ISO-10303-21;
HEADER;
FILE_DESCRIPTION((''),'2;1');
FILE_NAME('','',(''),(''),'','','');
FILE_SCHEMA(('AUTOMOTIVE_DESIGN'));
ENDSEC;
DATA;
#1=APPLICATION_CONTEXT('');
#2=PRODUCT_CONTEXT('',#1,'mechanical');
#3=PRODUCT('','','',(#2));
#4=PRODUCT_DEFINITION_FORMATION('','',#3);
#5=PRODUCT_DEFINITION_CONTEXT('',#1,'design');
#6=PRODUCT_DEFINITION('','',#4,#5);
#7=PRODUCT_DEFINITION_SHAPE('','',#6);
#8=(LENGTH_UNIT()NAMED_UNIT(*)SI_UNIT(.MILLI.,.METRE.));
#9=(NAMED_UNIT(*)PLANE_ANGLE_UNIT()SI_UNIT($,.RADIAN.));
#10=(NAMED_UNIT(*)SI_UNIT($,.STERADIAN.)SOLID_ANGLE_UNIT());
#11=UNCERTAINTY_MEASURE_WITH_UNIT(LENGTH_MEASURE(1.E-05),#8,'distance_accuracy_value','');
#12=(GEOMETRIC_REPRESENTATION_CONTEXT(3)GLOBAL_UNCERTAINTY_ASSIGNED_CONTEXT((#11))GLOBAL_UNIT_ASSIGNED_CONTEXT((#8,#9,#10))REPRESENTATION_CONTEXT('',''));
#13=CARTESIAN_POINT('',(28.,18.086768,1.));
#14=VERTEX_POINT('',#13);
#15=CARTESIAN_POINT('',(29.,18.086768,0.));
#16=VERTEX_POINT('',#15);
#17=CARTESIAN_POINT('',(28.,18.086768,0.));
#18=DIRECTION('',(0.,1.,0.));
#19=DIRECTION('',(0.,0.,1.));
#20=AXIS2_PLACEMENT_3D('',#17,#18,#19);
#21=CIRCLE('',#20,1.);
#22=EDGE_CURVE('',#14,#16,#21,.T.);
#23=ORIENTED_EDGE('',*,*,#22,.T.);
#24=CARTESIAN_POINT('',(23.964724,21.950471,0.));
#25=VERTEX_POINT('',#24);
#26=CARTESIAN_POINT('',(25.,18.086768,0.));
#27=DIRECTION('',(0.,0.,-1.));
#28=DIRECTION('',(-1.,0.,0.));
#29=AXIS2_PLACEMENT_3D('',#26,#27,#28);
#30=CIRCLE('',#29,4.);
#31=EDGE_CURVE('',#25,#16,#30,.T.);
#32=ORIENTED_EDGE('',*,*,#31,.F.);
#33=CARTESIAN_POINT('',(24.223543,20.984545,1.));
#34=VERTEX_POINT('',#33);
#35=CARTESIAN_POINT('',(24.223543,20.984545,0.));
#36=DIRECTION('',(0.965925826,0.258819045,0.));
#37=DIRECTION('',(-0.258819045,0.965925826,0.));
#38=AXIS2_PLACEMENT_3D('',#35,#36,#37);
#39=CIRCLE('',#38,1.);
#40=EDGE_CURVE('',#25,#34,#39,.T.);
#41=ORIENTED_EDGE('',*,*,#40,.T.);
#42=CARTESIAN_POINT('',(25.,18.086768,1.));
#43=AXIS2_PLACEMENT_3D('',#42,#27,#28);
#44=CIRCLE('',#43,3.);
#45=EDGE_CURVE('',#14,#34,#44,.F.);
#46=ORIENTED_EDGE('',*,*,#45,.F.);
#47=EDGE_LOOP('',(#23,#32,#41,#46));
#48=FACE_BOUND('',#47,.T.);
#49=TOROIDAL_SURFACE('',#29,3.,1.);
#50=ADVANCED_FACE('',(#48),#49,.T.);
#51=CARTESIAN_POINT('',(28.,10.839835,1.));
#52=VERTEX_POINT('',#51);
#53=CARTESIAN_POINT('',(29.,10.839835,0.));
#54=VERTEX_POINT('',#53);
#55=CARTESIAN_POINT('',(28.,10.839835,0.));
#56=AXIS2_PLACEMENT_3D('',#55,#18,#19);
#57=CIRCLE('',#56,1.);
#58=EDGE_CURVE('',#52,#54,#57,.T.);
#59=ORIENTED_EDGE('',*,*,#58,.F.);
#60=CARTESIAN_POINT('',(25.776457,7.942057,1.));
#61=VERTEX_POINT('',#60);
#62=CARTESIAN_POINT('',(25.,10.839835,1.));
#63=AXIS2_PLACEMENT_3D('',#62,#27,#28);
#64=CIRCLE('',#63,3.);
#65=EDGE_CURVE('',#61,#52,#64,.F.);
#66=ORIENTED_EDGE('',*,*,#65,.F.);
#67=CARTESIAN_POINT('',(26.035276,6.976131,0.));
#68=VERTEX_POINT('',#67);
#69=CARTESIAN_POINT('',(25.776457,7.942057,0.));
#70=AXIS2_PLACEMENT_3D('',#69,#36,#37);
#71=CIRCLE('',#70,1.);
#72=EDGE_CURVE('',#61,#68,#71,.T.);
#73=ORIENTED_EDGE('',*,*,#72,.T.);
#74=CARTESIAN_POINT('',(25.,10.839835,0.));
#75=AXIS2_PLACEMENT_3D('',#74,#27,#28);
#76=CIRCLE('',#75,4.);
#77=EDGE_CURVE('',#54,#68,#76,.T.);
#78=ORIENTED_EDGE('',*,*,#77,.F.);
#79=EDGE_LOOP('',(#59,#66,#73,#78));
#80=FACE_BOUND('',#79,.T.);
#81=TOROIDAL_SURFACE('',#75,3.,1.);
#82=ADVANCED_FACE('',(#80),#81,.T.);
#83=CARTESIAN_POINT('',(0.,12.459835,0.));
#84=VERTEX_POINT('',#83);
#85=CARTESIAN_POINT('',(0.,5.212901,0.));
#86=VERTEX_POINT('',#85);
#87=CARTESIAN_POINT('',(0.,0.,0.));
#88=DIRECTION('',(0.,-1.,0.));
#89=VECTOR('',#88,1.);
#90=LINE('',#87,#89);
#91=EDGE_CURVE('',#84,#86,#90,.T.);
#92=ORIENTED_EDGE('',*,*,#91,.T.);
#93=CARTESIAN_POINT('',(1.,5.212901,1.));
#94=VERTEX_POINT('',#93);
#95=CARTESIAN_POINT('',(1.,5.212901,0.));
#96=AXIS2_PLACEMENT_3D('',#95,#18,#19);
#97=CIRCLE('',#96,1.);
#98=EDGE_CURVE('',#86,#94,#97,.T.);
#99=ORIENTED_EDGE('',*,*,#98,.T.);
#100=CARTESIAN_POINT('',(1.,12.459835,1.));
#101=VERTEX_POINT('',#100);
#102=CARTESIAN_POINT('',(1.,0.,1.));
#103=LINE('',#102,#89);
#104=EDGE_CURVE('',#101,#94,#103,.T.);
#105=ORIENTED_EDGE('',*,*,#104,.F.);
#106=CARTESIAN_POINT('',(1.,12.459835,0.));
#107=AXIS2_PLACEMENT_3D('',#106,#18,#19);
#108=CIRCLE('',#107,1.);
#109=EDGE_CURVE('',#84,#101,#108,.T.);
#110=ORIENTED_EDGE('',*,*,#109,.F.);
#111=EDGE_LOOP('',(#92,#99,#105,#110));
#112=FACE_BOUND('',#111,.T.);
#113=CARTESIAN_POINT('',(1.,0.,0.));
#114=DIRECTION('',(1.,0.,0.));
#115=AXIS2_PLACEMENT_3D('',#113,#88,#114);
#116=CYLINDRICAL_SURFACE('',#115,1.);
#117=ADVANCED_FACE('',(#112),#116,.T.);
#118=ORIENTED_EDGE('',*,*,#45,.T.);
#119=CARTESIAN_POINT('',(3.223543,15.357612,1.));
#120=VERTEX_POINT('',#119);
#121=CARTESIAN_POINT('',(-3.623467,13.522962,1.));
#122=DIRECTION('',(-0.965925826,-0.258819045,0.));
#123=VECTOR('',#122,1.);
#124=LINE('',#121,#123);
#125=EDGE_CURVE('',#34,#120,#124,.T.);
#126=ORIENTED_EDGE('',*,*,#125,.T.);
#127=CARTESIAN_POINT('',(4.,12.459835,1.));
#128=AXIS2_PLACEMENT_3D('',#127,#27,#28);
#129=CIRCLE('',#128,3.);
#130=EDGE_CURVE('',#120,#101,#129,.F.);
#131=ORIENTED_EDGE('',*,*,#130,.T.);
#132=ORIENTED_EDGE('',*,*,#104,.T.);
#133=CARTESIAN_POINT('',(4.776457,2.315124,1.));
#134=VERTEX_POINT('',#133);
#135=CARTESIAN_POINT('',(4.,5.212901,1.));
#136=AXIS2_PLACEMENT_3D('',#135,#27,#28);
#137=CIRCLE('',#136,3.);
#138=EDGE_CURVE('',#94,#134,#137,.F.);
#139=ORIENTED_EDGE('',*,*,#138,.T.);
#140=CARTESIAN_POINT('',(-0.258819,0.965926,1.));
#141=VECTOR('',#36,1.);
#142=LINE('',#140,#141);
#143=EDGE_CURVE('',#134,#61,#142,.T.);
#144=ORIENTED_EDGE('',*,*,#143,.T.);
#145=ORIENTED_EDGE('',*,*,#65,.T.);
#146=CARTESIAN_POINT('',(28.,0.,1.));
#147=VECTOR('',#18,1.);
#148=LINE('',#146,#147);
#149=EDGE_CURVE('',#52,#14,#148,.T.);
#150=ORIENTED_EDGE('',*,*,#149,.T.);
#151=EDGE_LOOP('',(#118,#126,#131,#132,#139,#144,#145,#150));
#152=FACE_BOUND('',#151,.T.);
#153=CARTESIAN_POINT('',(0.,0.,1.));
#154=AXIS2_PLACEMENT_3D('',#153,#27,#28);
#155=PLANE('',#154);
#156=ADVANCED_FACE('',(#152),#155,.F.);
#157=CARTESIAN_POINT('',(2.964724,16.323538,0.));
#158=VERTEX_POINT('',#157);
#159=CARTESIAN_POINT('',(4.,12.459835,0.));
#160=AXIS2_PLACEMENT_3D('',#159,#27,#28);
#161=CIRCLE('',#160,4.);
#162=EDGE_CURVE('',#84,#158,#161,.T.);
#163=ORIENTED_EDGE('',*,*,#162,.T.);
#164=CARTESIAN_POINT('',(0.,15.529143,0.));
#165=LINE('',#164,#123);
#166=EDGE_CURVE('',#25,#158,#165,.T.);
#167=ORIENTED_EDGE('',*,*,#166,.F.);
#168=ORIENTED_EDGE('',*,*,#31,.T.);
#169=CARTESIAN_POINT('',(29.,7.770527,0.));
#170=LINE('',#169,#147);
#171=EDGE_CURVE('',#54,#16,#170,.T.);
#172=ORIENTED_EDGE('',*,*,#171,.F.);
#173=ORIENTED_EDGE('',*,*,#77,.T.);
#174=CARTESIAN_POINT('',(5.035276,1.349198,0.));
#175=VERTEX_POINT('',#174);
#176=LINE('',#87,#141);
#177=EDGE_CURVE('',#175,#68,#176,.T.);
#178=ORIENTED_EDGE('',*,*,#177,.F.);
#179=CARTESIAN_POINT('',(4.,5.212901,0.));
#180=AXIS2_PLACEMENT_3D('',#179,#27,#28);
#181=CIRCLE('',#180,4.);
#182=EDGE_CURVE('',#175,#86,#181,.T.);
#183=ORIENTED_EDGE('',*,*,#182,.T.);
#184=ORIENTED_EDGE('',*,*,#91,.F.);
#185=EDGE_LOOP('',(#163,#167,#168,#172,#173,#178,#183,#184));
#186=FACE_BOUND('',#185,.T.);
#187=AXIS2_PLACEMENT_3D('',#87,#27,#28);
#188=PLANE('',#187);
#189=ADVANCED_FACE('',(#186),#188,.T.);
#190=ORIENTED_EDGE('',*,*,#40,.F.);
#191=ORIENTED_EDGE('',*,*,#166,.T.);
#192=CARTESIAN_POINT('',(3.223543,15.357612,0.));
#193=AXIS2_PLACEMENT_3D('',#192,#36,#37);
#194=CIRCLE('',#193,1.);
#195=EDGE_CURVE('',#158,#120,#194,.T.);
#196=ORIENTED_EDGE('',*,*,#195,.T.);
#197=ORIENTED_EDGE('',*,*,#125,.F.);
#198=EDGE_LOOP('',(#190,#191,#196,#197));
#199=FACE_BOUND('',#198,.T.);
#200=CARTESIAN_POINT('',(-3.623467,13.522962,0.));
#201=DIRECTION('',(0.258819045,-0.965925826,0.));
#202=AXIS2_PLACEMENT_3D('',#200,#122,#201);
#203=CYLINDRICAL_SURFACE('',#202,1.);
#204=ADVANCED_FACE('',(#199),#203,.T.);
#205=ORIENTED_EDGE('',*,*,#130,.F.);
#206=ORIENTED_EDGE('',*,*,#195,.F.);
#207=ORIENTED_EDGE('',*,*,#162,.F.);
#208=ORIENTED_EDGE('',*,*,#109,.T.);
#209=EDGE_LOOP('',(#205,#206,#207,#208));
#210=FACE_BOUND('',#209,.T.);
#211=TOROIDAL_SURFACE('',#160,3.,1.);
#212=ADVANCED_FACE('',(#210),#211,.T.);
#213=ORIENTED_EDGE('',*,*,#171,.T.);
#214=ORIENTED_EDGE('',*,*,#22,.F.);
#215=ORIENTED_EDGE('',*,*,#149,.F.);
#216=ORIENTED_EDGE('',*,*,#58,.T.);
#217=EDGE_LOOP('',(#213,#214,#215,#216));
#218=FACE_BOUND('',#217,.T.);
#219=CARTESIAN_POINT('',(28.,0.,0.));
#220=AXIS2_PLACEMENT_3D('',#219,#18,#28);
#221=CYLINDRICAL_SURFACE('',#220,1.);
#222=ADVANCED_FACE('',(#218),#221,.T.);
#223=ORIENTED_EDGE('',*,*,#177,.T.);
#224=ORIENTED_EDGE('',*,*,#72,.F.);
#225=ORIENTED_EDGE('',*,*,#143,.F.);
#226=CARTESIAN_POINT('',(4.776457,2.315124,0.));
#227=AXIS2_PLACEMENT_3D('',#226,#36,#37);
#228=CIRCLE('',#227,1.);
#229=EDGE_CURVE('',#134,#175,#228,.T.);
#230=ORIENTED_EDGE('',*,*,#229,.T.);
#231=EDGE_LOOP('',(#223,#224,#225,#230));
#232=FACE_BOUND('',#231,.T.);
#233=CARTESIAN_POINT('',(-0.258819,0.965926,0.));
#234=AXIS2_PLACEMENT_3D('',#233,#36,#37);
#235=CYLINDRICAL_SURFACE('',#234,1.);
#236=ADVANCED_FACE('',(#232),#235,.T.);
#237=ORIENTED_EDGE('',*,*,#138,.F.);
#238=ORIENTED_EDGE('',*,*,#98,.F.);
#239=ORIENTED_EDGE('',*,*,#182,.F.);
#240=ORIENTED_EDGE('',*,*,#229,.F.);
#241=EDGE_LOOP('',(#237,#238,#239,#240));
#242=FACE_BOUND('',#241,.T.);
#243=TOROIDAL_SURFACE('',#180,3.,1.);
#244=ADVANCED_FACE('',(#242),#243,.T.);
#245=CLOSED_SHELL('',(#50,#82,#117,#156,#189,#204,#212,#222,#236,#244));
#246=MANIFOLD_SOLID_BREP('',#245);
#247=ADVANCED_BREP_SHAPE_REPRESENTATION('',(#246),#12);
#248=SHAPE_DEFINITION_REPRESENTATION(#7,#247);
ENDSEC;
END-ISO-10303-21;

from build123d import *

# Parameters (mm, degrees)
EXTRUDE_1_DEPTH = 1
FILLET_1_R      = 4
FILLET_2_R      = 1


with BuildPart() as part:
    # Эскиз1 → Бобышка-Вытянуть1 (new body)
    with BuildSketch(Plane.XY):
        Polygon((0, 0), (29, 7.770526581), (29, 23.299669287), (0, 15.529142706), align=None)
    extrude(amount=EXTRUDE_1_DEPTH)

    # Скругление1
    fillet_1_edges = [part.edges().sort_by_distance(p)[0] for p in [
        (0, 15.529142706, 0.5),
        (29, 23.299669287, 0.5),
        (29, 7.770526581, 0.5),
        (0, 0, 0.5),
    ]]
    fillet(fillet_1_edges, radius=FILLET_1_R)

    # Скругление2
    fillet_2_edges = [part.edges().sort_by_distance(p)[0] for p in [
        (27.435045716, 21.260181156, 1),
        (29, 14.463301164, 1),
        (28.173413361, 8.404788816, 1),
        (15.53527618, 4.162664707, 1),
        (1.564954284, 2.03948813, 1),
        (0, 8.836368123, 1),
        (0.826586639, 14.89488047, 1),
        (13.46472382, 19.13700458, 1),
    ]]
    fillet(fillet_2_edges, radius=FILLET_2_R - 0.0001)  # a hair under: the kernel refuses the full size


solid = part.part
